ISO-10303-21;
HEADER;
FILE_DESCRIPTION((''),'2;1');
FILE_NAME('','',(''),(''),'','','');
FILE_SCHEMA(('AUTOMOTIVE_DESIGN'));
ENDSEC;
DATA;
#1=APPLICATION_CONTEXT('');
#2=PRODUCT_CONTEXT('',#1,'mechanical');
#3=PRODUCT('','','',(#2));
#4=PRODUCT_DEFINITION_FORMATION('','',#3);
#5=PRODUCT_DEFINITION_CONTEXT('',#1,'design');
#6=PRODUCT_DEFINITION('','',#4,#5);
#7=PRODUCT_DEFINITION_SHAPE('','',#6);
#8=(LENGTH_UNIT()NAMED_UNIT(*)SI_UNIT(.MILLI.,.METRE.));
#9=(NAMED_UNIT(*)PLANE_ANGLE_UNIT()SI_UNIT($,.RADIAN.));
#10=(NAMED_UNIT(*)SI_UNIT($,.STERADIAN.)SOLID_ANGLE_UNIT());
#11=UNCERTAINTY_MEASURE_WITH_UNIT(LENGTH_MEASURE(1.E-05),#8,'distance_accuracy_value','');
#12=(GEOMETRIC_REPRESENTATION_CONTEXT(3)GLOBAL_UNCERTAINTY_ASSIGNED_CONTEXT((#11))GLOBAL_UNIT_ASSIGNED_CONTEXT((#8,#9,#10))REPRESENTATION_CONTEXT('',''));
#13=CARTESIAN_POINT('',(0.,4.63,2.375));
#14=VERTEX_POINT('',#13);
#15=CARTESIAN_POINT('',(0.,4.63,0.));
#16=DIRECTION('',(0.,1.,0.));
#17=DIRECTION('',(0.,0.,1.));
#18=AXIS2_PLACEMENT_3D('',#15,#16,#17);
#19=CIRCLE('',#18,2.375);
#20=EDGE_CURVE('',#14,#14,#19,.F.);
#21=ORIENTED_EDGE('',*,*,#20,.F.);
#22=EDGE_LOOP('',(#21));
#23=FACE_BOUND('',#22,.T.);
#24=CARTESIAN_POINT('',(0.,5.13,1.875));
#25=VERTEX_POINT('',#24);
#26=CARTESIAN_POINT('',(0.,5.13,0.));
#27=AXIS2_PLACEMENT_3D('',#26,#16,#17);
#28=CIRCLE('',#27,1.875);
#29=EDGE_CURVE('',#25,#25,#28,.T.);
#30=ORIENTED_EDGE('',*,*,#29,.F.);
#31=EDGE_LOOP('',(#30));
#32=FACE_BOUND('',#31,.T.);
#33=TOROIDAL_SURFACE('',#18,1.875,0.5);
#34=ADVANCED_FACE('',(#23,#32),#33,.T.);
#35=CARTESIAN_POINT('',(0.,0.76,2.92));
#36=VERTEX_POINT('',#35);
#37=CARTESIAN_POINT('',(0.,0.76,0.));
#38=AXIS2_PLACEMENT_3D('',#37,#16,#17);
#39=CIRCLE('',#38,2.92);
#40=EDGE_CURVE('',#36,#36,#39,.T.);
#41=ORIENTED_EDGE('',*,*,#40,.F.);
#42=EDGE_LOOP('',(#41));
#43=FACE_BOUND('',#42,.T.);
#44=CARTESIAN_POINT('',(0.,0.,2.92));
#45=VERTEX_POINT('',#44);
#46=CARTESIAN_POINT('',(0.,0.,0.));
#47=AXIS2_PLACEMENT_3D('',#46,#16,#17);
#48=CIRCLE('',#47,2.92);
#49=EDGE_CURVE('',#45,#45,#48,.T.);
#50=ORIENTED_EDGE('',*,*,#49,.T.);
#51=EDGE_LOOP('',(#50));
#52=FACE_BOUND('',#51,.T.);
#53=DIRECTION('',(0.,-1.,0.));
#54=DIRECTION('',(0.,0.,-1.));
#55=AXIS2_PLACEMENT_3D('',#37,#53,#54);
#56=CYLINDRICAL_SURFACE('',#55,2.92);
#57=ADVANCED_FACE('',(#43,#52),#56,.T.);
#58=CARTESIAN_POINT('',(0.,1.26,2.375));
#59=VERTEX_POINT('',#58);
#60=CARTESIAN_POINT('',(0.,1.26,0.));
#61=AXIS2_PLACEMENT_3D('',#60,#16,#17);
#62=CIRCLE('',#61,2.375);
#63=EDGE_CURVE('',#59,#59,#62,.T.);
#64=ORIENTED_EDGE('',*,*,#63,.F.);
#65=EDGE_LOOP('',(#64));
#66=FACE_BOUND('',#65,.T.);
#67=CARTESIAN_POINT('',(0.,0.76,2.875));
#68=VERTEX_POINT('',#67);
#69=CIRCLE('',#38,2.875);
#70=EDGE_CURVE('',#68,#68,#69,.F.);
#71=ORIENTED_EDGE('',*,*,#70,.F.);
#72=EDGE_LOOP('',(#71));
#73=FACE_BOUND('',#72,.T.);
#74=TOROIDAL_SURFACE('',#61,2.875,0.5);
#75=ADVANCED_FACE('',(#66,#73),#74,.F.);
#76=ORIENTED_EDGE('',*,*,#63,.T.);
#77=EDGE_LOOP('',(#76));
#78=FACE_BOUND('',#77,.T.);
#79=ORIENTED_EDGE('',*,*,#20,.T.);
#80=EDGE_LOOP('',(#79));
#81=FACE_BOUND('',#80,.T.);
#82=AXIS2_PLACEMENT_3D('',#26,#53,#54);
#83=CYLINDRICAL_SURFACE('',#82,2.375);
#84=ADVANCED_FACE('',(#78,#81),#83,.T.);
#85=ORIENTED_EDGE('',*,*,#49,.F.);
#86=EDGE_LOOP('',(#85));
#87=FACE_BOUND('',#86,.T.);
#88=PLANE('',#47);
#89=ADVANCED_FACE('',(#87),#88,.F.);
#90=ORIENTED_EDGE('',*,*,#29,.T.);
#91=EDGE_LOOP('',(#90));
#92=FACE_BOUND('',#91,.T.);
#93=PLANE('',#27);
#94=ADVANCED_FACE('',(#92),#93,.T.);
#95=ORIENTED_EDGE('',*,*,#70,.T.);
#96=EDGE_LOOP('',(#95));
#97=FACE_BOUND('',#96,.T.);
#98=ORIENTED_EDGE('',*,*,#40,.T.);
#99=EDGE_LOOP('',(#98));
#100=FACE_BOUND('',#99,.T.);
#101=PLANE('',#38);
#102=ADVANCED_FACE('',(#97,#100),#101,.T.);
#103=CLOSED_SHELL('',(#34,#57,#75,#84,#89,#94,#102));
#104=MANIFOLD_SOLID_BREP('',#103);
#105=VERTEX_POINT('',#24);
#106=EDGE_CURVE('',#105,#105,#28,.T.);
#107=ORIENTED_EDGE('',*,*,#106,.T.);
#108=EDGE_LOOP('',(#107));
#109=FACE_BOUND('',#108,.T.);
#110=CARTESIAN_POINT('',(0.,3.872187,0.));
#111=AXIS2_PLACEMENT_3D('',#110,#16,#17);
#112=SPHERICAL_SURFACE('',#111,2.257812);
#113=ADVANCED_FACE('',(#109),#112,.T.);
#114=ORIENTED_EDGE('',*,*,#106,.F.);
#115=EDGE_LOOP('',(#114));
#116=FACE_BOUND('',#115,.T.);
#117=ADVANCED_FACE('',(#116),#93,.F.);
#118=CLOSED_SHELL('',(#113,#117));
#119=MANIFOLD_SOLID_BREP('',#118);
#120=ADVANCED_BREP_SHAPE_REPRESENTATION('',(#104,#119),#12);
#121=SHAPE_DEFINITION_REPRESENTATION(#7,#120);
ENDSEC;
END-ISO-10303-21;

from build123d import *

# Parameters (mm, degrees)
SKETCH1_R           = 2.92
BOSS_EXTRUDE1_DEPTH = 0.76
SKETCH3_R           = 2.375
BOSS_EXTRUDE2_DEPTH = 4.37
FILLET1_R           = 0.5


# Read off the part's stored shape, not the designer's step: Dome1
with BuildPart() as part:
    # Sketch1 → Boss-Extrude1 (new body)
    with BuildSketch(Plane(origin=(0, 0, 0), x_dir=(1, 0, 0), z_dir=(0, 1, 0))):
        with Locations(Location((0, 0, 0), (0, 0, 270))):
            Circle(SKETCH1_R)
    extrude(amount=BOSS_EXTRUDE1_DEPTH)

    # Sketch3 → Boss-Extrude2 (add)
    with BuildSketch(Plane(origin=(0, 0.76, 0), x_dir=(1, 0, 0), z_dir=(0, 1, 0))):
        with Locations(Location((0, 0, 0), (0, 0, 270))):
            Circle(SKETCH3_R)
    extrude(amount=BOSS_EXTRUDE2_DEPTH)

    # Fillet1
    fillet1_edges = [part.edges().sort_by_distance(p)[0] for p in [
        (0, 0.76, -2.375),
        (0, 5.13, -2.375),
    ]]
    fillet(fillet1_edges, radius=FILLET1_R)

    # Dome1 outline → Dome1 (revolve)
    with BuildSketch(Plane.XY):
        with BuildLine():
            Line((0, 5.13), (1.875000001, 5.129999998))
            ThreePointArc((1.875000001, 5.129999998), (1.062500001, 5.864374999), (0, 6.13))
            Line((0, 6.13), (0, 5.13))
        make_face()
    revolve(axis=Axis((0, 0, 0), (0, 1, 0)))


with BuildPart() as body_2:
    # Split1: the piece on the far side of the plane
    add(part.part)
    split(bisect_by=Plane.ZX.offset(5.13), keep=Keep.BOTTOM)


with BuildPart() as part_1:
    add(part.part)

    # Split1
    split(bisect_by=Plane.ZX.offset(5.13), keep=Keep.TOP)


solid = Compound([body_2.part, part_1.part])
